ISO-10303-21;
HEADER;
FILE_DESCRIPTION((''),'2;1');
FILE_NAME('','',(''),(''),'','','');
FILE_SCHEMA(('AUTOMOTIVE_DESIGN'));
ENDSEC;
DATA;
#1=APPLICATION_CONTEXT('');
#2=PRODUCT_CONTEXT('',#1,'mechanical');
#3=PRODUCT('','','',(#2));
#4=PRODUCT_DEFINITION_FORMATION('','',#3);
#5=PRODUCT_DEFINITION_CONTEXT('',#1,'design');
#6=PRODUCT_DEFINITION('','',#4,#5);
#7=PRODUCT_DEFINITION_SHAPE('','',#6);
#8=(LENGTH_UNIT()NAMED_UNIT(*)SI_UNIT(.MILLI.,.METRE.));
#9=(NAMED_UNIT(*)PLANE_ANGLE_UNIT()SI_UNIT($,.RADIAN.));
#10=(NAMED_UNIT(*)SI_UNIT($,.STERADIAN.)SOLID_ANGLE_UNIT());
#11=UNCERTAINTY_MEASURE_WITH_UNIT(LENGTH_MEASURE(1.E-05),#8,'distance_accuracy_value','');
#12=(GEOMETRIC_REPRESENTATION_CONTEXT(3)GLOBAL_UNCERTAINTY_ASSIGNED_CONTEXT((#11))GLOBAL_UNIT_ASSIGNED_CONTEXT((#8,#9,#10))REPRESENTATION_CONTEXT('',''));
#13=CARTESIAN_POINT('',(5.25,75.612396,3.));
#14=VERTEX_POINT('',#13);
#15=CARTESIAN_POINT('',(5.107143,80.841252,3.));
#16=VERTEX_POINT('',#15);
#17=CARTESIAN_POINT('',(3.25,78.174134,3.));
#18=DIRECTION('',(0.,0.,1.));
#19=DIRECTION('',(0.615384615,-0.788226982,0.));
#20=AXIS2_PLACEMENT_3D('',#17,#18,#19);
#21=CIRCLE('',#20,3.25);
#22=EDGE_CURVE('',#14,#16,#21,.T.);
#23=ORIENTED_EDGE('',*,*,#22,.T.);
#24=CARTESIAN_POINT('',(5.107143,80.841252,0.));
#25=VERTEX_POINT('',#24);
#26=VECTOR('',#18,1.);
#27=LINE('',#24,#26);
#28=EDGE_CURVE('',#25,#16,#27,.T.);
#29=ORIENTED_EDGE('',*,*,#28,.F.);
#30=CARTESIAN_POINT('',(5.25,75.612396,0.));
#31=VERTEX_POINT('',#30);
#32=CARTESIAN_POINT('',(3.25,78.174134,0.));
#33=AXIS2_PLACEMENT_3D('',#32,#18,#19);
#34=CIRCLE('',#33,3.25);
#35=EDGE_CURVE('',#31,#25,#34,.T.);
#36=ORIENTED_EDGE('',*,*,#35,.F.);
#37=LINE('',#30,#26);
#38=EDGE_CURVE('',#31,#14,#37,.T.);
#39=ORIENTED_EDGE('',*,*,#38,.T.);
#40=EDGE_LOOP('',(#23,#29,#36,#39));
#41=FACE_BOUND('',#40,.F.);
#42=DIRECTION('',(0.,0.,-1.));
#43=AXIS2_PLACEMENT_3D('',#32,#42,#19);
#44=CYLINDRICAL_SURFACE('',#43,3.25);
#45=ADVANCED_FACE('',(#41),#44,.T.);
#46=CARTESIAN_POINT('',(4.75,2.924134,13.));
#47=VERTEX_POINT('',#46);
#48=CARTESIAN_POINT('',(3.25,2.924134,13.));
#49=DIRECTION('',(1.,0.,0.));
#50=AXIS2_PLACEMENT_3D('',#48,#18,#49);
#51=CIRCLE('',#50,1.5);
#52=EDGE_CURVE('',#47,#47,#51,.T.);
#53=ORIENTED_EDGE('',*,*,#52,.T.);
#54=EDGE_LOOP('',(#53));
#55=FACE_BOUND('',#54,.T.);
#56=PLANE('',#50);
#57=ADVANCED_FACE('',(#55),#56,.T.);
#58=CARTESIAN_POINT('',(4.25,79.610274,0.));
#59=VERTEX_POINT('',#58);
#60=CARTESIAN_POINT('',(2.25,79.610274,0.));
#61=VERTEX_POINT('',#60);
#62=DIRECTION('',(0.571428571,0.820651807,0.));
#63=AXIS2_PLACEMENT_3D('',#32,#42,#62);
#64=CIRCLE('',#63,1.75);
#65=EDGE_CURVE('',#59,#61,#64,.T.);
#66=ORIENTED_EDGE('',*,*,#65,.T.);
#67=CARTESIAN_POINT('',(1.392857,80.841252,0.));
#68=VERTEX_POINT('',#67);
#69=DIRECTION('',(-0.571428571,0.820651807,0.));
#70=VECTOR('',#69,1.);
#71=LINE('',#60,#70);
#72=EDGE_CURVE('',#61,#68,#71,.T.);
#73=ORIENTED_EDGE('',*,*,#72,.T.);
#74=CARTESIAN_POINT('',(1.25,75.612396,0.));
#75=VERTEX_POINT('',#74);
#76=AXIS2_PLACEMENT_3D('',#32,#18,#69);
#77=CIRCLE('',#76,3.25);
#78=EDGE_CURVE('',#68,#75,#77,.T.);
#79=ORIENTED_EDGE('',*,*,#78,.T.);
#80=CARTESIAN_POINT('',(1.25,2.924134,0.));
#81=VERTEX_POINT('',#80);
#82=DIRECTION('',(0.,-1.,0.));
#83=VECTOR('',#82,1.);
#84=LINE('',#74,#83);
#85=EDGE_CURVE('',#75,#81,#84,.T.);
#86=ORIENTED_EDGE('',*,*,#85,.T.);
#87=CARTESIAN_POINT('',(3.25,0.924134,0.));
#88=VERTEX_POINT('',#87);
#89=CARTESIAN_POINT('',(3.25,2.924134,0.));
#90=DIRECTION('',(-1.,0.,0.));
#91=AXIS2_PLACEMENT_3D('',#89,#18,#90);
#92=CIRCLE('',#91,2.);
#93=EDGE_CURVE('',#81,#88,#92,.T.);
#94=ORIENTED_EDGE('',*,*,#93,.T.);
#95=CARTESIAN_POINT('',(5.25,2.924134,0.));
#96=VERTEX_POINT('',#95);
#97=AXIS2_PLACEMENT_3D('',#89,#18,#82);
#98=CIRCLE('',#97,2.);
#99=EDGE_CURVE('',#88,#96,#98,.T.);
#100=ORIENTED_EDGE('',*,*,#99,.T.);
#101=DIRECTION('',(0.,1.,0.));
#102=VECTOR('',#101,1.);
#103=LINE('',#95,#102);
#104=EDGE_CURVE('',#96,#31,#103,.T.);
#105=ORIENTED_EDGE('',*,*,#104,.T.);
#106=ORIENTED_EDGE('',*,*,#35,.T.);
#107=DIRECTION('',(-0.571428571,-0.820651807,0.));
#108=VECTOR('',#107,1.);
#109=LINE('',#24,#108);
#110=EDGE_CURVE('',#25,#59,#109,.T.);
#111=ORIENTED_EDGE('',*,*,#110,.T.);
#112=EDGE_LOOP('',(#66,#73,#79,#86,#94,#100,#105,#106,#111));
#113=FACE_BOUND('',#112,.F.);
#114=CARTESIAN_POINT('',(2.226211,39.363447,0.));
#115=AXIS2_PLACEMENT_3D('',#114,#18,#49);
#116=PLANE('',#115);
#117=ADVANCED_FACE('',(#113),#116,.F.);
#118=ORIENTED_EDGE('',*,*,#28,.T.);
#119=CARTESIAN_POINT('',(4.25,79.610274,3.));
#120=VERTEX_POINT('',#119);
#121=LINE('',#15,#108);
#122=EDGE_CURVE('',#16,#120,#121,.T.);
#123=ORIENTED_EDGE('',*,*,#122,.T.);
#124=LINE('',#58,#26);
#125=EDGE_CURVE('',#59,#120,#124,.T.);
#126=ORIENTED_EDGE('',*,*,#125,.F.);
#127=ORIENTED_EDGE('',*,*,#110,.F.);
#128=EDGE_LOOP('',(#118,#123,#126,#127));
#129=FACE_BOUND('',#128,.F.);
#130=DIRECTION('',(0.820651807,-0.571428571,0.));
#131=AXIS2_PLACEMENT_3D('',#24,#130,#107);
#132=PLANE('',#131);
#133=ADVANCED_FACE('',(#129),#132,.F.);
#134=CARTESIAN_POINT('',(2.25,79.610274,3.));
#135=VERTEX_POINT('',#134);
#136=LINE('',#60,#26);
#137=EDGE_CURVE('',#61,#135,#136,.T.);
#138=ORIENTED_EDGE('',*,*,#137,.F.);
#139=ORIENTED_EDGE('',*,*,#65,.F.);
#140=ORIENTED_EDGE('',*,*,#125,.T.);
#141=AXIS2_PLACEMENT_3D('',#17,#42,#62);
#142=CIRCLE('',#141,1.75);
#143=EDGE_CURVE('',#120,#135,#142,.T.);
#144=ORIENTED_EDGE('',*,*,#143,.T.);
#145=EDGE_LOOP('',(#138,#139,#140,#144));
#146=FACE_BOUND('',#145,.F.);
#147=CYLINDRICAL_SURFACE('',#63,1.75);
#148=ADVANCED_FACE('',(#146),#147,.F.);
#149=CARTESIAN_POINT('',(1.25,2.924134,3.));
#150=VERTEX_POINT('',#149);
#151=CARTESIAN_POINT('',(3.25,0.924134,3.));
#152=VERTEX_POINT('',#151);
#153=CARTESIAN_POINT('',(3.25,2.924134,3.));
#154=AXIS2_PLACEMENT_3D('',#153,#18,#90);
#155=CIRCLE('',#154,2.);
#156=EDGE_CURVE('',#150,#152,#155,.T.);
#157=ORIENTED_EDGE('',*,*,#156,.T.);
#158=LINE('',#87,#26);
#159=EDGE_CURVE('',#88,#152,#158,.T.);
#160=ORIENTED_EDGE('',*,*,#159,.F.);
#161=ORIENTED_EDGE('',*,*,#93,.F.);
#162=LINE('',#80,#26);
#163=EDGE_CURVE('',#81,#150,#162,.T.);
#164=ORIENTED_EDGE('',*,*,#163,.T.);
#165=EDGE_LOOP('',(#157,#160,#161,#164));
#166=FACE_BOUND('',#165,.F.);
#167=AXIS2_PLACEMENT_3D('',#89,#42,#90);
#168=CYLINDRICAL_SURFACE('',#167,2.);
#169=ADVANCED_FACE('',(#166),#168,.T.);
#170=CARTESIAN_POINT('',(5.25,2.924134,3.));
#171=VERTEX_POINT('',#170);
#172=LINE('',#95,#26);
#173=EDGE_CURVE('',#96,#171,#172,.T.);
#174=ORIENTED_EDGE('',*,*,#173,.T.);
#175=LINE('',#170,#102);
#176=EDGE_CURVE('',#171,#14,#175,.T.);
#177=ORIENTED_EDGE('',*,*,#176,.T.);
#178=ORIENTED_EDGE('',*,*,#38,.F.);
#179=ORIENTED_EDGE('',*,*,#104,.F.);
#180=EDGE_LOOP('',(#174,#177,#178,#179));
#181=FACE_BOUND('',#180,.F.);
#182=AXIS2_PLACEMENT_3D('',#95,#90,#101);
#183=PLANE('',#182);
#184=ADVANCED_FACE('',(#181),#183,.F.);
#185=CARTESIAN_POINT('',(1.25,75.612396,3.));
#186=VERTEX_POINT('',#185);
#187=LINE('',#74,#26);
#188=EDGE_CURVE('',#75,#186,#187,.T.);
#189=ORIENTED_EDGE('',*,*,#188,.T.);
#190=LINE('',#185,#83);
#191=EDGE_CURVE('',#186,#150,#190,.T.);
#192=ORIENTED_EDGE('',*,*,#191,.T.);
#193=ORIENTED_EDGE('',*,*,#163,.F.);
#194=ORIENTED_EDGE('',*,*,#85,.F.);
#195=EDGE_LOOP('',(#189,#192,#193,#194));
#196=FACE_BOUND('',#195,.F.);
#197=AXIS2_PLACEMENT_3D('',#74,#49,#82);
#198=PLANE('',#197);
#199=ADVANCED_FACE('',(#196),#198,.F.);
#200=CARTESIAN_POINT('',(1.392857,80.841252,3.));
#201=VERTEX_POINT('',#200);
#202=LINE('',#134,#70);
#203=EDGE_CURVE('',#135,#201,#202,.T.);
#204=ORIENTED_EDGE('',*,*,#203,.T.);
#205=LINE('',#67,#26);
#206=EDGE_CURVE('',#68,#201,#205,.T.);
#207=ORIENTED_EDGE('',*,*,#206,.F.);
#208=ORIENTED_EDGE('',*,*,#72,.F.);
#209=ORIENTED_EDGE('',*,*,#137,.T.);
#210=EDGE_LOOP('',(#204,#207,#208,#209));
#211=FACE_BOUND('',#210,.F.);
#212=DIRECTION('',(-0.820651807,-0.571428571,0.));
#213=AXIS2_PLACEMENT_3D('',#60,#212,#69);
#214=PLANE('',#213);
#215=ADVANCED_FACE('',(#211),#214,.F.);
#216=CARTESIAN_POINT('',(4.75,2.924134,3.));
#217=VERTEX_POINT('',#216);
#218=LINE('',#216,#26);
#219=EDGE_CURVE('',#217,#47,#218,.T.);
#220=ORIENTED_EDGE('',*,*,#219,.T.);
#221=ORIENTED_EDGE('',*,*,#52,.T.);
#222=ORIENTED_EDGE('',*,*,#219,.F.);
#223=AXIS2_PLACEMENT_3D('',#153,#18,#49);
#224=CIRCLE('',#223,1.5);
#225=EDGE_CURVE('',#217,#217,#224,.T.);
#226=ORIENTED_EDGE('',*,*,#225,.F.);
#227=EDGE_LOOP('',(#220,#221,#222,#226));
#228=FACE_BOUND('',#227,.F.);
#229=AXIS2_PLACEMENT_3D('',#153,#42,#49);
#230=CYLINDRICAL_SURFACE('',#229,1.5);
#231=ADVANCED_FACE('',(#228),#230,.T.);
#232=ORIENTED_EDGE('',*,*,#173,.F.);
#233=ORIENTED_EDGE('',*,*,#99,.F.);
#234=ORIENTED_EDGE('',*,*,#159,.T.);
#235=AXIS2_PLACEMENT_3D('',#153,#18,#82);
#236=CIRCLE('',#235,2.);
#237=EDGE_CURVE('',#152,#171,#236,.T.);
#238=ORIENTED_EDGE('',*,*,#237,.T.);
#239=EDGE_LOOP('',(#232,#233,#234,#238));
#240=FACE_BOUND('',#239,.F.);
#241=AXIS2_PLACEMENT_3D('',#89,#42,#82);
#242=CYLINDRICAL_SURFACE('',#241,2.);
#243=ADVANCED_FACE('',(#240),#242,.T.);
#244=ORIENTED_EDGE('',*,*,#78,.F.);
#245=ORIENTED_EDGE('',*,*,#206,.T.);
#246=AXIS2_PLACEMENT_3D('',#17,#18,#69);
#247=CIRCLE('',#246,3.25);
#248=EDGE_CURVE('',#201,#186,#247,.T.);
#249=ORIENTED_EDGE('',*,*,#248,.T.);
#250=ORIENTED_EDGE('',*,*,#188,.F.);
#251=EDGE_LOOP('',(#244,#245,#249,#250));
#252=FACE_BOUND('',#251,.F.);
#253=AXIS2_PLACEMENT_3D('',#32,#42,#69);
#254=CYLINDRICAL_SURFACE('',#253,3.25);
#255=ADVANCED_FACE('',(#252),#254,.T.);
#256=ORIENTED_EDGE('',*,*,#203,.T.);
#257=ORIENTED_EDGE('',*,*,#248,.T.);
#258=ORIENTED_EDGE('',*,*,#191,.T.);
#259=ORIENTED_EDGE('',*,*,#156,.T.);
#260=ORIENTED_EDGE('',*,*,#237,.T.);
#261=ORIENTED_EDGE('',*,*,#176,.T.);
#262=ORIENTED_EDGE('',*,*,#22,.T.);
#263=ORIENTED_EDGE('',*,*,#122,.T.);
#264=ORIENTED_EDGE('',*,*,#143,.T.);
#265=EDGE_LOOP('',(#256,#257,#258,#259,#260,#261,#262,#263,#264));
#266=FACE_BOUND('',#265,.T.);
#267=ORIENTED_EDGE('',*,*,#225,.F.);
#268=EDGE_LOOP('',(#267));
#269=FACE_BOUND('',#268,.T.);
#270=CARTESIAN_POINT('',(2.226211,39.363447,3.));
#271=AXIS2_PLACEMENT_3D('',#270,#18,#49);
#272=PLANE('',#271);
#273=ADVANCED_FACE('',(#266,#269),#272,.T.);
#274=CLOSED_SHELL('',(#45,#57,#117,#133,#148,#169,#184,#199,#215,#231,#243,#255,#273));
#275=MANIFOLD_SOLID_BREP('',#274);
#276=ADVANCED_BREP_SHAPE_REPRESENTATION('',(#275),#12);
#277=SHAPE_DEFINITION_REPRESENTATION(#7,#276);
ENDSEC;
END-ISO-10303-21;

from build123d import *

# Parameters (mm, degrees)
F1_DEPTH = 3
F2_R     = 1.5
F3_DEPTH = 10


# Not quite as in the source:
# - a feature names something its author has since deleted; it is built from what else it names


with BuildPart() as f1:
    # F0 (on Top) → F1 (new body)
    with BuildSketch(Plane.XY):
        with BuildLine():
            ThreePointArc((3.25, 74.9241337907), (2.1924432633, 75.1010126169), (1.25, 75.6123960992))
            Line((1.25, 75.6123960992), (1.25, 2.9241337907))
            ThreePointArc((1.25, 2.9241337907), (1.8357864376, 4.338347353), (3.25, 4.9241337907))
            Line((3.25, 4.9241337907), (3.25, 74.9241337907))
        make_face()
        with BuildLine():
            ThreePointArc((3.25, 4.9241337907), (1.8357864376, 4.338347353), (1.25, 2.9241337907))
            ThreePointArc((1.25, 2.9241337907), (1.8357864376, 1.5099202283), (3.25, 0.9241337907))
            Line((3.25, 0.9241337907), (3.25, 4.9241337907))
        make_face()
        with BuildLine():
            ThreePointArc((5.25, 75.6123960992), (4.3075567367, 75.1010126169), (3.25, 74.9241337907))
            Line((3.25, 74.9241337907), (3.25, 4.9241337907))
            ThreePointArc((3.25, 4.9241337907), (4.6642135624, 4.338347353), (5.25, 2.9241337907))
            Line((5.25, 2.9241337907), (5.25, 75.6123960992))
        make_face()
        with BuildLine():
            ThreePointArc((5.25, 2.9241337907), (4.6642135624, 4.338347353), (3.25, 4.9241337907))
            Line((3.25, 4.9241337907), (3.25, 0.9241337907))
            ThreePointArc((3.25, 0.9241337907), (4.6642135624, 1.5099202283), (5.25, 2.9241337907))
        make_face()
        with BuildLine():
            Line((2.25, 79.6102744523), (1.3928571429, 80.8412521623))
            ThreePointArc((1.3928571429, 80.8412521623), (0.0012122742, 78.2628936507), (1.25, 75.6123960992))
            ThreePointArc((1.25, 75.6123960992), (2.1924432633, 75.1010126169), (3.25, 74.9241337907))
            ThreePointArc((3.25, 74.9241337907), (4.3075567367, 75.1010126169), (5.25, 75.6123960992))
            ThreePointArc((5.25, 75.6123960992), (6.4987877258, 78.2628936507), (5.1071428571, 80.8412521623))
            Line((5.1071428571, 80.8412521623), (4.25, 79.6102744523))
            ThreePointArc((4.25, 79.6102744523), (3.25, 76.4241337907), (2.25, 79.6102744523))
        make_face()
    extrude(amount=F1_DEPTH)

    # F2 (on face) → F3 (join)
    with BuildSketch(Plane.XY.offset(3)):
        with Locations((3.25, 2.9241337907)):
            Circle(F2_R)
    extrude(amount=F3_DEPTH)


solid = f1.part
